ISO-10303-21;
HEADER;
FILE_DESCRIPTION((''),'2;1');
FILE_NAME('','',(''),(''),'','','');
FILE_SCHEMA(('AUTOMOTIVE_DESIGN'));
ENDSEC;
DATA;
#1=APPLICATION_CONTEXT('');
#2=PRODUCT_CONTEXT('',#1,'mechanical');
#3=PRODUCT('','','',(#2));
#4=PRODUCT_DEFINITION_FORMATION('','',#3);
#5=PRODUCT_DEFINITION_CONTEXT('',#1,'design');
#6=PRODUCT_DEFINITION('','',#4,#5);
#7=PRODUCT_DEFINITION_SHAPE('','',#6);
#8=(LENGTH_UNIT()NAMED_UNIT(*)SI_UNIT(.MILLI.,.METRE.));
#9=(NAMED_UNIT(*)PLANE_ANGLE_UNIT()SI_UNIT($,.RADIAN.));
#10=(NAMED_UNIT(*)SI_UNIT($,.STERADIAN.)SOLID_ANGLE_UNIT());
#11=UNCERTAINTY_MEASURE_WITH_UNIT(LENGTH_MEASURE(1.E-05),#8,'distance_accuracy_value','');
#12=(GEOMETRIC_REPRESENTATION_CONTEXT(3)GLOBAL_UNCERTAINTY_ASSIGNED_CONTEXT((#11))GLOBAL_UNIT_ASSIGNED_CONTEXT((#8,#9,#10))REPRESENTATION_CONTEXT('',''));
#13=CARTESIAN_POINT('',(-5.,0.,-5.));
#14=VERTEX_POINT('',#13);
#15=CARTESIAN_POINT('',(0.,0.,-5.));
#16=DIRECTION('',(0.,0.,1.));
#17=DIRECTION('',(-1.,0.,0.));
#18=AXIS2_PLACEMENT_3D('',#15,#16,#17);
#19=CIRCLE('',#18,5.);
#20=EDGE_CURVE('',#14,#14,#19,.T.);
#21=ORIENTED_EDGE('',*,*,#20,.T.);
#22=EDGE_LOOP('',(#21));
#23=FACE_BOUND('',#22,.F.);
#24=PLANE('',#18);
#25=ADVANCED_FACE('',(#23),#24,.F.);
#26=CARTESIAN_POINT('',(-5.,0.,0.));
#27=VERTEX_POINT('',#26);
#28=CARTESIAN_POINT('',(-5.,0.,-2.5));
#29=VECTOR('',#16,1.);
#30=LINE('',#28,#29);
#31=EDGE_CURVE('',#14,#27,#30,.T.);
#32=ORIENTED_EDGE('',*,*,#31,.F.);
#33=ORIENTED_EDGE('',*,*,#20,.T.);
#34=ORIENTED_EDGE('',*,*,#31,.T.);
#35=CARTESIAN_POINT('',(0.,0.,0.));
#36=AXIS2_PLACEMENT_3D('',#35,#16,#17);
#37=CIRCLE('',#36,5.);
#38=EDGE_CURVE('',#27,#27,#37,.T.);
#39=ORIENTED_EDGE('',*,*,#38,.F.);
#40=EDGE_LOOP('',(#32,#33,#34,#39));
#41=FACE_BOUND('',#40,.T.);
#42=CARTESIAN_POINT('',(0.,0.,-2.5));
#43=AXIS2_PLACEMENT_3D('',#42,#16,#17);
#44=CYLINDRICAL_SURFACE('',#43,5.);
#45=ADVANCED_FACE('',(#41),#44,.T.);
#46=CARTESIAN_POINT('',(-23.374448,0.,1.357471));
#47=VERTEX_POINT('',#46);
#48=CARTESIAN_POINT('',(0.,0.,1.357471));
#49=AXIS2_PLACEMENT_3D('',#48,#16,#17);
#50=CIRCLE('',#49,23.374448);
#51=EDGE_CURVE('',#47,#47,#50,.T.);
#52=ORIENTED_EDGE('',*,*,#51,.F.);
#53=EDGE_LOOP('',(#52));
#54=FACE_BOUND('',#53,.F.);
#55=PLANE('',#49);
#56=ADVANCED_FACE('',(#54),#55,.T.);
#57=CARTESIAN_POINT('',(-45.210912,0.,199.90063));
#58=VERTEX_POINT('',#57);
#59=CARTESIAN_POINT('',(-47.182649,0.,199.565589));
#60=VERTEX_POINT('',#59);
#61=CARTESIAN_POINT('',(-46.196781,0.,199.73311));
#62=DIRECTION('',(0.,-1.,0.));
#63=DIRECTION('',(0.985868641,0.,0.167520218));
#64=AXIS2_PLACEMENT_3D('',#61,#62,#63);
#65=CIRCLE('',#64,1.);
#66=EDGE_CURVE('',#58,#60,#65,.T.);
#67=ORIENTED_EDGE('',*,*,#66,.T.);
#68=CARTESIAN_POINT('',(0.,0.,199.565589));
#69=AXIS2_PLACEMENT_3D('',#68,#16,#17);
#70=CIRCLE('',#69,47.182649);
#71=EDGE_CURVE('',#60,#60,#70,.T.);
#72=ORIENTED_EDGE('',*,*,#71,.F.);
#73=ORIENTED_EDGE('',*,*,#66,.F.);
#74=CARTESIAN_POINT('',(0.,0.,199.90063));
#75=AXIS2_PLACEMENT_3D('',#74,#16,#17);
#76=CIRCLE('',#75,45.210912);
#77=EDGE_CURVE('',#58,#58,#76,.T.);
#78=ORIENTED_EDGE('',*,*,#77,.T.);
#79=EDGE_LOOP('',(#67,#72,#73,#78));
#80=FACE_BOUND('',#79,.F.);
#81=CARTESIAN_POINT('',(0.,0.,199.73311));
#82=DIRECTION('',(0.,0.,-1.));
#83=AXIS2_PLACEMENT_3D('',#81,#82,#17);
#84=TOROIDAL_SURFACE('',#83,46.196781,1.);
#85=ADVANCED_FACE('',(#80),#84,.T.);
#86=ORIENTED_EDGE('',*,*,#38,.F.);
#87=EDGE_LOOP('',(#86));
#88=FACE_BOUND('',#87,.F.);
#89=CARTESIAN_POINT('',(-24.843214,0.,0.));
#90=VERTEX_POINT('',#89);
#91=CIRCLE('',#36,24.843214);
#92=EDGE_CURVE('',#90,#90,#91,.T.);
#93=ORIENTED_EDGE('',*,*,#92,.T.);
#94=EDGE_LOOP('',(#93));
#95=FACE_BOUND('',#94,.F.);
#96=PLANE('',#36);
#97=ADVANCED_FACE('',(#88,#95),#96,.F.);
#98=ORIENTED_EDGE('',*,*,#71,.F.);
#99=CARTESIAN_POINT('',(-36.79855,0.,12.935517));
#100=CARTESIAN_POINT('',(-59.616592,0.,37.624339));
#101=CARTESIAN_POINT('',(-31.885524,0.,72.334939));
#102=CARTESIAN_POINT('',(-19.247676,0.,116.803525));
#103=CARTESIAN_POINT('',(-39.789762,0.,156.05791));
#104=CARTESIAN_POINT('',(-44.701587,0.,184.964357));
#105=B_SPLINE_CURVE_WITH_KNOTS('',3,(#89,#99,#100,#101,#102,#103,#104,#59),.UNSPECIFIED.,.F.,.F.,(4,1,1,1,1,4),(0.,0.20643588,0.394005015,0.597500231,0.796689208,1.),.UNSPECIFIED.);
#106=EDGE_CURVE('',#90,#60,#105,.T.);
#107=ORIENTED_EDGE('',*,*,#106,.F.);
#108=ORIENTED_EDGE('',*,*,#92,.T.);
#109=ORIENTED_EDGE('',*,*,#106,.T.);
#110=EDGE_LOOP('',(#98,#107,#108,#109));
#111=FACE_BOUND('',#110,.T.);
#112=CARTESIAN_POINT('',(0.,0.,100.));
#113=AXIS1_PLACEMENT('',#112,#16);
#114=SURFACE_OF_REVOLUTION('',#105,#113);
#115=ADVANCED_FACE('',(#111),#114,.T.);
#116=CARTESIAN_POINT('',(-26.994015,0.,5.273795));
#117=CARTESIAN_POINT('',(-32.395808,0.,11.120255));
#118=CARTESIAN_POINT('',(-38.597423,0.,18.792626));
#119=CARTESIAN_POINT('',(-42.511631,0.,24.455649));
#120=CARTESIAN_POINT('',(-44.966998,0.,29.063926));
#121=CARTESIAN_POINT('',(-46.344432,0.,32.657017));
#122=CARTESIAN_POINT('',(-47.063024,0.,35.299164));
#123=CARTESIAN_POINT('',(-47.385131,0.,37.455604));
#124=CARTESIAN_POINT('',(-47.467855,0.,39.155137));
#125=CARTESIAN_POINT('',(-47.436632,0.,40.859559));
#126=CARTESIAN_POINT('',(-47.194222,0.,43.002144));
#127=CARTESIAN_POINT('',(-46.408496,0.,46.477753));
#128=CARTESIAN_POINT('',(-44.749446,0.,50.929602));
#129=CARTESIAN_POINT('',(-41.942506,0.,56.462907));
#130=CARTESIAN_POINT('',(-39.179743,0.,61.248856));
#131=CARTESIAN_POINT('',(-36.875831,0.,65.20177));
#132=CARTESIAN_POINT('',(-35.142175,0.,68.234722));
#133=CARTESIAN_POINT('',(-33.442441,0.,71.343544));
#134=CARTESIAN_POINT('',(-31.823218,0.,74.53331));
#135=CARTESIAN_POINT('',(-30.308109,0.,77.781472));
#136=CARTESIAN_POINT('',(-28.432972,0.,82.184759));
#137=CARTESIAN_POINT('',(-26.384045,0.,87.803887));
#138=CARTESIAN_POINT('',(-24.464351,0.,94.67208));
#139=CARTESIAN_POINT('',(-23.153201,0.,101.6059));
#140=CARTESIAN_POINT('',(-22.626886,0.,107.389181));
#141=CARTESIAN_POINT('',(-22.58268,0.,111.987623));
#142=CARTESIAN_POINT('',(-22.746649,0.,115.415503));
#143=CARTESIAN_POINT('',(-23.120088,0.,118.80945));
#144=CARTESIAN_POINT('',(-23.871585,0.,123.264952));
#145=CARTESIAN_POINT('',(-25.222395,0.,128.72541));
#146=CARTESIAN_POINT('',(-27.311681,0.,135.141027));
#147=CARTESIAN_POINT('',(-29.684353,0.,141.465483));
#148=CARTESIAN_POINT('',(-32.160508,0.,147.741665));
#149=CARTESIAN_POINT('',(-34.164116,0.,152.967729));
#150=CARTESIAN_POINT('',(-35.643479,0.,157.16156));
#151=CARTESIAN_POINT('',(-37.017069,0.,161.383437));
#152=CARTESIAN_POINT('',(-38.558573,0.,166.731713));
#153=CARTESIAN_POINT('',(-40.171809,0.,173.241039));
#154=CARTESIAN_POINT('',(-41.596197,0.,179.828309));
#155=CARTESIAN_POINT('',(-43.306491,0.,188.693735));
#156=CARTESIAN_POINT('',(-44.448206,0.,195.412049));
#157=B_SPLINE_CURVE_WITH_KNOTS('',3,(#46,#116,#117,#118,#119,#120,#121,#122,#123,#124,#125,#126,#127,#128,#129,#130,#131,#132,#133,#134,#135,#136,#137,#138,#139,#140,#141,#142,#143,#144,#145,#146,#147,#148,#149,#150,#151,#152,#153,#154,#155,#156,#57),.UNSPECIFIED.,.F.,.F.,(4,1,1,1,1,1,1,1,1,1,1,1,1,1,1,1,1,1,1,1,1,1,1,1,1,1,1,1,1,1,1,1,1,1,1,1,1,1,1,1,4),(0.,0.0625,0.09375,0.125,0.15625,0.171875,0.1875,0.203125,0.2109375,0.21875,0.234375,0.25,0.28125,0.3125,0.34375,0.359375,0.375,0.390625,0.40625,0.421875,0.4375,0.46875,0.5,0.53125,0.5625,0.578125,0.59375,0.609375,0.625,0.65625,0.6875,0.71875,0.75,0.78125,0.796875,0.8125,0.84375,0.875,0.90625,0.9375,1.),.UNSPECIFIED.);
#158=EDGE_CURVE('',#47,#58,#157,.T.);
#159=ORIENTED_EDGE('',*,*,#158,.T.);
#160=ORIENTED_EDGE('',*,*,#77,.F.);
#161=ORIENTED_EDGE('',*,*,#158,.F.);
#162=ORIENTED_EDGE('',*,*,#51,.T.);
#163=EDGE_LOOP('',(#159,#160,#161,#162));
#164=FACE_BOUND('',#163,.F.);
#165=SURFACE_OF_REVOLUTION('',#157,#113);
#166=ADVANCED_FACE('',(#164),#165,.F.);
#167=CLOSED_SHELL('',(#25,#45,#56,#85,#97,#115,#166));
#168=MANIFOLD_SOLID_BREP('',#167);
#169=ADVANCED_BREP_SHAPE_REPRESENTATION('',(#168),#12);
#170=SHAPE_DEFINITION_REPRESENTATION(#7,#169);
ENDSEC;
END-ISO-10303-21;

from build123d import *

# Parameters (mm, degrees)
F0_W = 5
F0_H = 5


# Not quite as in the source:
# - the dataset's text gives a spline's control points without its knots; the knots are read off the source's solid


with BuildPart() as f1:
    # F0 (on Front) → F1 (revolve)
    with BuildSketch(Plane.XZ):
        with Locations((-2.5, -2.5)):
            Rectangle(F0_W, F0_H)
        with BuildLine():
            Line((-5, 0), (0, 0))
            Line((0, 0), (0, 1.357470914))
            Line((0, 1.357470914), (-23.3744483674, 1.357470914))
            add(Edge.make_bspline(
                [(-23.3744483674, 1.357470914), (-26.9940154857, 5.2737950295), (-32.3958084194, 11.1202548003), (-38.5974229234, 18.7926259764), (-42.5116314376, 24.4556489393), (-44.9669979841, 29.0639255642), (-46.3444322656, 32.6570174613), (-47.0630238008, 35.2991638271), (-47.3851311152, 37.4556042958), (-47.467854793, 39.1551372252), (-47.4366323083, 40.8595593368), (-47.1942215666, 43.0021437734), (-46.4084964609, 46.4777528716), (-44.7494455682, 50.9296022978), (-41.9425063015, 56.4629071494), (-39.1797430833, 61.2488563048), (-36.8758309462, 65.2017700904), (-35.1421745504, 68.2347216488), (-33.4424405909, 71.3435440457), (-31.8232180061, 74.5333096422), (-30.3081094419, 77.7814715165), (-28.4329715862, 82.1847590127), (-26.3840449379, 87.8038869714), (-24.4643511316, 94.6720795313), (-23.1532010798, 101.6058999887), (-22.6268855428, 107.3891814457), (-22.582680222, 111.9876234078), (-22.746649479, 115.4155028738), (-23.1200882918, 118.8094501955), (-23.8715848452, 123.2649518512), (-25.2223949579, 128.7254103965), (-27.3116814834, 135.1410271419), (-29.6843531472, 141.4654830014), (-32.1605084683, 147.7416653668), (-34.1641158717, 152.9677291628), (-35.6434792171, 157.1615596431), (-37.0170688293, 161.3834372842), (-38.5585731614, 166.7317126547), (-40.1718090355, 173.241039345), (-41.5961972128, 179.8283087594), (-43.3064907395, 188.6937352088), (-44.4482058994, 195.4120485635), (-45.2109120928, 199.900629864)],
                knots=[1e-10, 1e-10, 1e-10, 1e-10, 0.0625000001, 0.0937500001, 0.1250000001, 0.1562500001, 0.1718750001, 0.1875000001, 0.2031250001, 0.2109375001, 0.2187500001, 0.2343750001, 0.2500000001, 0.2812500001, 0.3125000001, 0.3437500001, 0.3593750001, 0.3750000001, 0.3906250001, 0.4062500001, 0.4218750001, 0.4375000001, 0.46875, 0.5, 0.53125, 0.5625, 0.578125, 0.59375, 0.609375, 0.625, 0.65625, 0.6875, 0.71875, 0.75, 0.78125, 0.796875, 0.8125, 0.84375, 0.875, 0.90625, 0.9375, 1, 1, 1, 1], degree=3))
            ThreePointArc((-45.2109120928, 199.900629864), (-46.3643009514, 200.7189782866), (-47.182649374, 199.5655894279))
            add(Edge.make_bspline(
                [(-24.8432140797, 0), (-36.7985504643, 12.9355170555), (-59.6165920238, 37.6243385384), (-31.8855243353, 72.3349389124), (-19.2476756471, 116.8035249141), (-39.7897618973, 156.0579100961), (-44.7015869636, 184.964357082), (-47.182649374, 199.5655894279)],
                knots=[0, 0, 0, 0, 0.2064358802, 0.3940050152, 0.597500231, 0.7966892075, 1, 1, 1, 1], degree=3))
            Line((-24.8432140797, 0), (-5, 0))
        make_face()
    revolve(axis=Axis((0, 0, 100), (0, 0, 1)))


solid = f1.part
